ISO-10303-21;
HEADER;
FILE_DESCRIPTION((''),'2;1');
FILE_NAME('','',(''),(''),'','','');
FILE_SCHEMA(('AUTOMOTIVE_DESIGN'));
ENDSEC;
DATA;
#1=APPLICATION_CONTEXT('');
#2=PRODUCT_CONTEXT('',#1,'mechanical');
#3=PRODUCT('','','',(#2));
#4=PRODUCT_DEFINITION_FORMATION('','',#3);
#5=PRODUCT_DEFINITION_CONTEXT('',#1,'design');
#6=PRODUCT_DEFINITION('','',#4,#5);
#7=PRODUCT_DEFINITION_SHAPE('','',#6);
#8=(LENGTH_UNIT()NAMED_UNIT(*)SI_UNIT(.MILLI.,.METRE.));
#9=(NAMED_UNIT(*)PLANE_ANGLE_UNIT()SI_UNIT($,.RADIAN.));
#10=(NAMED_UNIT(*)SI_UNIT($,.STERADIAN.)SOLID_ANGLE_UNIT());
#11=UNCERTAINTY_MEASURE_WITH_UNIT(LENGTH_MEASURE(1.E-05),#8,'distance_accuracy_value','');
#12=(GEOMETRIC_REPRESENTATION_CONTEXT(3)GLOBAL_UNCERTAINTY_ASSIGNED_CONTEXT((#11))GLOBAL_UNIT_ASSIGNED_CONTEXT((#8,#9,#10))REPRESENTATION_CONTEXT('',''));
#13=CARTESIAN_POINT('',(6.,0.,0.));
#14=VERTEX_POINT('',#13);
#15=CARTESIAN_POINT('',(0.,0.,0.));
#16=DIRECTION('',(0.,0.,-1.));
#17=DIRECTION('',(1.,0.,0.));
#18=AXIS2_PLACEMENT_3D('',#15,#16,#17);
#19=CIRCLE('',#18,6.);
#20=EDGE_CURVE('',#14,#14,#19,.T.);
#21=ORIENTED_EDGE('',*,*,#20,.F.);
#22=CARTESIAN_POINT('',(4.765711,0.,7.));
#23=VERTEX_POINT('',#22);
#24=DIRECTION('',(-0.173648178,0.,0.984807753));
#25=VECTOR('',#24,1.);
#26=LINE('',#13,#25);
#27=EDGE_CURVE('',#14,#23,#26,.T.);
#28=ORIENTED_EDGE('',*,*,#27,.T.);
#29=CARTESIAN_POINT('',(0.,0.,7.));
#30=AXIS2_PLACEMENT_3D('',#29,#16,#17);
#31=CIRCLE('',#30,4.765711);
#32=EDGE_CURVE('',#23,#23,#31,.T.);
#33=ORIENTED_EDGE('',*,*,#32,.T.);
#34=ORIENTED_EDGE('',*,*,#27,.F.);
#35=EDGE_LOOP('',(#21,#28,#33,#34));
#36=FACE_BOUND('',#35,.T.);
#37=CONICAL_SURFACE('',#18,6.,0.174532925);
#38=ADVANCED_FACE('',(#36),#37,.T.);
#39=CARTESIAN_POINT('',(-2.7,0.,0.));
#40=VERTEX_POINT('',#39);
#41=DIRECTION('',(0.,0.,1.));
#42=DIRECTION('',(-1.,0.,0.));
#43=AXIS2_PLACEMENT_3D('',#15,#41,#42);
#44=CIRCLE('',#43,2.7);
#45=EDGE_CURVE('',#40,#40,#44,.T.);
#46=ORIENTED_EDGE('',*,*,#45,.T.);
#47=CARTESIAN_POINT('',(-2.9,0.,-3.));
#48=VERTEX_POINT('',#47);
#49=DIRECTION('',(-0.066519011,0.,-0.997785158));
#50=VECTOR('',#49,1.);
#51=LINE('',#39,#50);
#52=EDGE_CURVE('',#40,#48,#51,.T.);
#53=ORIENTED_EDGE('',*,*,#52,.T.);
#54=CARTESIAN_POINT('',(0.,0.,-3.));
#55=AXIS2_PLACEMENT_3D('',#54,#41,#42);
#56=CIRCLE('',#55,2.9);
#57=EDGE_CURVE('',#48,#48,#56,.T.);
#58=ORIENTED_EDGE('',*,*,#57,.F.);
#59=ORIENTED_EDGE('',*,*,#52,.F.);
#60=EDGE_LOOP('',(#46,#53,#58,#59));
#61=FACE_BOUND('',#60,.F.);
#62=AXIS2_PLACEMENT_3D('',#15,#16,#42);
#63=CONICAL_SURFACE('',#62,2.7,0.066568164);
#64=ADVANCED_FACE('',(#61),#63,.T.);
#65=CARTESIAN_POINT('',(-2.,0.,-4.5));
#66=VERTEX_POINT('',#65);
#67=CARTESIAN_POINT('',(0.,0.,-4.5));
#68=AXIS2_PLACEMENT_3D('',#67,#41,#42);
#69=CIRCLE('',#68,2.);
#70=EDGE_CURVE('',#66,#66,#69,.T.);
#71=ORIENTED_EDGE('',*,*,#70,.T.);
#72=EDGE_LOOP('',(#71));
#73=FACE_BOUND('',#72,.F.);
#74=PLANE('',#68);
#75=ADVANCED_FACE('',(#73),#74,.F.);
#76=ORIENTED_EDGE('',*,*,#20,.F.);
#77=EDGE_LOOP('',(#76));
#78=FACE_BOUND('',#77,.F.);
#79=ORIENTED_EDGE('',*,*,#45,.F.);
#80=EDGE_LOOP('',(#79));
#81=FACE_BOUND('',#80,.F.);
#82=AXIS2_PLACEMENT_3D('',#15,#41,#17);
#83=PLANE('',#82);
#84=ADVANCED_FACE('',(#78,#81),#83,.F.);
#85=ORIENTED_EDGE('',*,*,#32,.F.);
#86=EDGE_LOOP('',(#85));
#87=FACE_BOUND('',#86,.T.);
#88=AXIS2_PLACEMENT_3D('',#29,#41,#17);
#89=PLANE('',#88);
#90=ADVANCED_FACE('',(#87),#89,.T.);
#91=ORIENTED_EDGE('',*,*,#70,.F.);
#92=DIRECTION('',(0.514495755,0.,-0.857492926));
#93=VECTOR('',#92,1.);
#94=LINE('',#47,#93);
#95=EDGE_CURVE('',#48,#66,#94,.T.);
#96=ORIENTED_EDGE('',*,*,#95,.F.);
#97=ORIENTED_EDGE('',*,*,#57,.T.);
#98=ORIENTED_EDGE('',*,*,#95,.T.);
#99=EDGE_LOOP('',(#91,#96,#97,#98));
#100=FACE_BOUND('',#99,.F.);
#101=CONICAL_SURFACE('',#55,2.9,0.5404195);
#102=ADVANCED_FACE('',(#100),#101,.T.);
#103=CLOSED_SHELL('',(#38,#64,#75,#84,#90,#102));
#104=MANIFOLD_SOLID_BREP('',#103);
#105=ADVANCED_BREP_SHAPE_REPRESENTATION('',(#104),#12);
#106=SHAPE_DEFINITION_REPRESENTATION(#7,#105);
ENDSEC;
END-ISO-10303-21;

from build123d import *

# Parameters (mm, degrees)
F0_R     = 6
F1_DEPTH = 7
F1_TAPER = 10


# Not quite as in the source:
# - a feature names something its author has since deleted; it is built from what else it names


with BuildPart() as f1:
    # F0 (on Top) → F1 (new body)
    with BuildSketch(Plane.XY):
        Circle(F0_R)
    extrude(amount=F1_DEPTH, taper=F1_TAPER)

    # F2 (on Front) → F3 (revolve)
    with BuildSketch(Plane.XZ):
        Polygon((0, -4.5), (0, 0), (-2.7, 0), (-2.9, -3), (-2, -4.5), align=None)
    revolve(axis=Axis((0, 0, -2.25), (0, 0, 1)))


solid = f1.part
